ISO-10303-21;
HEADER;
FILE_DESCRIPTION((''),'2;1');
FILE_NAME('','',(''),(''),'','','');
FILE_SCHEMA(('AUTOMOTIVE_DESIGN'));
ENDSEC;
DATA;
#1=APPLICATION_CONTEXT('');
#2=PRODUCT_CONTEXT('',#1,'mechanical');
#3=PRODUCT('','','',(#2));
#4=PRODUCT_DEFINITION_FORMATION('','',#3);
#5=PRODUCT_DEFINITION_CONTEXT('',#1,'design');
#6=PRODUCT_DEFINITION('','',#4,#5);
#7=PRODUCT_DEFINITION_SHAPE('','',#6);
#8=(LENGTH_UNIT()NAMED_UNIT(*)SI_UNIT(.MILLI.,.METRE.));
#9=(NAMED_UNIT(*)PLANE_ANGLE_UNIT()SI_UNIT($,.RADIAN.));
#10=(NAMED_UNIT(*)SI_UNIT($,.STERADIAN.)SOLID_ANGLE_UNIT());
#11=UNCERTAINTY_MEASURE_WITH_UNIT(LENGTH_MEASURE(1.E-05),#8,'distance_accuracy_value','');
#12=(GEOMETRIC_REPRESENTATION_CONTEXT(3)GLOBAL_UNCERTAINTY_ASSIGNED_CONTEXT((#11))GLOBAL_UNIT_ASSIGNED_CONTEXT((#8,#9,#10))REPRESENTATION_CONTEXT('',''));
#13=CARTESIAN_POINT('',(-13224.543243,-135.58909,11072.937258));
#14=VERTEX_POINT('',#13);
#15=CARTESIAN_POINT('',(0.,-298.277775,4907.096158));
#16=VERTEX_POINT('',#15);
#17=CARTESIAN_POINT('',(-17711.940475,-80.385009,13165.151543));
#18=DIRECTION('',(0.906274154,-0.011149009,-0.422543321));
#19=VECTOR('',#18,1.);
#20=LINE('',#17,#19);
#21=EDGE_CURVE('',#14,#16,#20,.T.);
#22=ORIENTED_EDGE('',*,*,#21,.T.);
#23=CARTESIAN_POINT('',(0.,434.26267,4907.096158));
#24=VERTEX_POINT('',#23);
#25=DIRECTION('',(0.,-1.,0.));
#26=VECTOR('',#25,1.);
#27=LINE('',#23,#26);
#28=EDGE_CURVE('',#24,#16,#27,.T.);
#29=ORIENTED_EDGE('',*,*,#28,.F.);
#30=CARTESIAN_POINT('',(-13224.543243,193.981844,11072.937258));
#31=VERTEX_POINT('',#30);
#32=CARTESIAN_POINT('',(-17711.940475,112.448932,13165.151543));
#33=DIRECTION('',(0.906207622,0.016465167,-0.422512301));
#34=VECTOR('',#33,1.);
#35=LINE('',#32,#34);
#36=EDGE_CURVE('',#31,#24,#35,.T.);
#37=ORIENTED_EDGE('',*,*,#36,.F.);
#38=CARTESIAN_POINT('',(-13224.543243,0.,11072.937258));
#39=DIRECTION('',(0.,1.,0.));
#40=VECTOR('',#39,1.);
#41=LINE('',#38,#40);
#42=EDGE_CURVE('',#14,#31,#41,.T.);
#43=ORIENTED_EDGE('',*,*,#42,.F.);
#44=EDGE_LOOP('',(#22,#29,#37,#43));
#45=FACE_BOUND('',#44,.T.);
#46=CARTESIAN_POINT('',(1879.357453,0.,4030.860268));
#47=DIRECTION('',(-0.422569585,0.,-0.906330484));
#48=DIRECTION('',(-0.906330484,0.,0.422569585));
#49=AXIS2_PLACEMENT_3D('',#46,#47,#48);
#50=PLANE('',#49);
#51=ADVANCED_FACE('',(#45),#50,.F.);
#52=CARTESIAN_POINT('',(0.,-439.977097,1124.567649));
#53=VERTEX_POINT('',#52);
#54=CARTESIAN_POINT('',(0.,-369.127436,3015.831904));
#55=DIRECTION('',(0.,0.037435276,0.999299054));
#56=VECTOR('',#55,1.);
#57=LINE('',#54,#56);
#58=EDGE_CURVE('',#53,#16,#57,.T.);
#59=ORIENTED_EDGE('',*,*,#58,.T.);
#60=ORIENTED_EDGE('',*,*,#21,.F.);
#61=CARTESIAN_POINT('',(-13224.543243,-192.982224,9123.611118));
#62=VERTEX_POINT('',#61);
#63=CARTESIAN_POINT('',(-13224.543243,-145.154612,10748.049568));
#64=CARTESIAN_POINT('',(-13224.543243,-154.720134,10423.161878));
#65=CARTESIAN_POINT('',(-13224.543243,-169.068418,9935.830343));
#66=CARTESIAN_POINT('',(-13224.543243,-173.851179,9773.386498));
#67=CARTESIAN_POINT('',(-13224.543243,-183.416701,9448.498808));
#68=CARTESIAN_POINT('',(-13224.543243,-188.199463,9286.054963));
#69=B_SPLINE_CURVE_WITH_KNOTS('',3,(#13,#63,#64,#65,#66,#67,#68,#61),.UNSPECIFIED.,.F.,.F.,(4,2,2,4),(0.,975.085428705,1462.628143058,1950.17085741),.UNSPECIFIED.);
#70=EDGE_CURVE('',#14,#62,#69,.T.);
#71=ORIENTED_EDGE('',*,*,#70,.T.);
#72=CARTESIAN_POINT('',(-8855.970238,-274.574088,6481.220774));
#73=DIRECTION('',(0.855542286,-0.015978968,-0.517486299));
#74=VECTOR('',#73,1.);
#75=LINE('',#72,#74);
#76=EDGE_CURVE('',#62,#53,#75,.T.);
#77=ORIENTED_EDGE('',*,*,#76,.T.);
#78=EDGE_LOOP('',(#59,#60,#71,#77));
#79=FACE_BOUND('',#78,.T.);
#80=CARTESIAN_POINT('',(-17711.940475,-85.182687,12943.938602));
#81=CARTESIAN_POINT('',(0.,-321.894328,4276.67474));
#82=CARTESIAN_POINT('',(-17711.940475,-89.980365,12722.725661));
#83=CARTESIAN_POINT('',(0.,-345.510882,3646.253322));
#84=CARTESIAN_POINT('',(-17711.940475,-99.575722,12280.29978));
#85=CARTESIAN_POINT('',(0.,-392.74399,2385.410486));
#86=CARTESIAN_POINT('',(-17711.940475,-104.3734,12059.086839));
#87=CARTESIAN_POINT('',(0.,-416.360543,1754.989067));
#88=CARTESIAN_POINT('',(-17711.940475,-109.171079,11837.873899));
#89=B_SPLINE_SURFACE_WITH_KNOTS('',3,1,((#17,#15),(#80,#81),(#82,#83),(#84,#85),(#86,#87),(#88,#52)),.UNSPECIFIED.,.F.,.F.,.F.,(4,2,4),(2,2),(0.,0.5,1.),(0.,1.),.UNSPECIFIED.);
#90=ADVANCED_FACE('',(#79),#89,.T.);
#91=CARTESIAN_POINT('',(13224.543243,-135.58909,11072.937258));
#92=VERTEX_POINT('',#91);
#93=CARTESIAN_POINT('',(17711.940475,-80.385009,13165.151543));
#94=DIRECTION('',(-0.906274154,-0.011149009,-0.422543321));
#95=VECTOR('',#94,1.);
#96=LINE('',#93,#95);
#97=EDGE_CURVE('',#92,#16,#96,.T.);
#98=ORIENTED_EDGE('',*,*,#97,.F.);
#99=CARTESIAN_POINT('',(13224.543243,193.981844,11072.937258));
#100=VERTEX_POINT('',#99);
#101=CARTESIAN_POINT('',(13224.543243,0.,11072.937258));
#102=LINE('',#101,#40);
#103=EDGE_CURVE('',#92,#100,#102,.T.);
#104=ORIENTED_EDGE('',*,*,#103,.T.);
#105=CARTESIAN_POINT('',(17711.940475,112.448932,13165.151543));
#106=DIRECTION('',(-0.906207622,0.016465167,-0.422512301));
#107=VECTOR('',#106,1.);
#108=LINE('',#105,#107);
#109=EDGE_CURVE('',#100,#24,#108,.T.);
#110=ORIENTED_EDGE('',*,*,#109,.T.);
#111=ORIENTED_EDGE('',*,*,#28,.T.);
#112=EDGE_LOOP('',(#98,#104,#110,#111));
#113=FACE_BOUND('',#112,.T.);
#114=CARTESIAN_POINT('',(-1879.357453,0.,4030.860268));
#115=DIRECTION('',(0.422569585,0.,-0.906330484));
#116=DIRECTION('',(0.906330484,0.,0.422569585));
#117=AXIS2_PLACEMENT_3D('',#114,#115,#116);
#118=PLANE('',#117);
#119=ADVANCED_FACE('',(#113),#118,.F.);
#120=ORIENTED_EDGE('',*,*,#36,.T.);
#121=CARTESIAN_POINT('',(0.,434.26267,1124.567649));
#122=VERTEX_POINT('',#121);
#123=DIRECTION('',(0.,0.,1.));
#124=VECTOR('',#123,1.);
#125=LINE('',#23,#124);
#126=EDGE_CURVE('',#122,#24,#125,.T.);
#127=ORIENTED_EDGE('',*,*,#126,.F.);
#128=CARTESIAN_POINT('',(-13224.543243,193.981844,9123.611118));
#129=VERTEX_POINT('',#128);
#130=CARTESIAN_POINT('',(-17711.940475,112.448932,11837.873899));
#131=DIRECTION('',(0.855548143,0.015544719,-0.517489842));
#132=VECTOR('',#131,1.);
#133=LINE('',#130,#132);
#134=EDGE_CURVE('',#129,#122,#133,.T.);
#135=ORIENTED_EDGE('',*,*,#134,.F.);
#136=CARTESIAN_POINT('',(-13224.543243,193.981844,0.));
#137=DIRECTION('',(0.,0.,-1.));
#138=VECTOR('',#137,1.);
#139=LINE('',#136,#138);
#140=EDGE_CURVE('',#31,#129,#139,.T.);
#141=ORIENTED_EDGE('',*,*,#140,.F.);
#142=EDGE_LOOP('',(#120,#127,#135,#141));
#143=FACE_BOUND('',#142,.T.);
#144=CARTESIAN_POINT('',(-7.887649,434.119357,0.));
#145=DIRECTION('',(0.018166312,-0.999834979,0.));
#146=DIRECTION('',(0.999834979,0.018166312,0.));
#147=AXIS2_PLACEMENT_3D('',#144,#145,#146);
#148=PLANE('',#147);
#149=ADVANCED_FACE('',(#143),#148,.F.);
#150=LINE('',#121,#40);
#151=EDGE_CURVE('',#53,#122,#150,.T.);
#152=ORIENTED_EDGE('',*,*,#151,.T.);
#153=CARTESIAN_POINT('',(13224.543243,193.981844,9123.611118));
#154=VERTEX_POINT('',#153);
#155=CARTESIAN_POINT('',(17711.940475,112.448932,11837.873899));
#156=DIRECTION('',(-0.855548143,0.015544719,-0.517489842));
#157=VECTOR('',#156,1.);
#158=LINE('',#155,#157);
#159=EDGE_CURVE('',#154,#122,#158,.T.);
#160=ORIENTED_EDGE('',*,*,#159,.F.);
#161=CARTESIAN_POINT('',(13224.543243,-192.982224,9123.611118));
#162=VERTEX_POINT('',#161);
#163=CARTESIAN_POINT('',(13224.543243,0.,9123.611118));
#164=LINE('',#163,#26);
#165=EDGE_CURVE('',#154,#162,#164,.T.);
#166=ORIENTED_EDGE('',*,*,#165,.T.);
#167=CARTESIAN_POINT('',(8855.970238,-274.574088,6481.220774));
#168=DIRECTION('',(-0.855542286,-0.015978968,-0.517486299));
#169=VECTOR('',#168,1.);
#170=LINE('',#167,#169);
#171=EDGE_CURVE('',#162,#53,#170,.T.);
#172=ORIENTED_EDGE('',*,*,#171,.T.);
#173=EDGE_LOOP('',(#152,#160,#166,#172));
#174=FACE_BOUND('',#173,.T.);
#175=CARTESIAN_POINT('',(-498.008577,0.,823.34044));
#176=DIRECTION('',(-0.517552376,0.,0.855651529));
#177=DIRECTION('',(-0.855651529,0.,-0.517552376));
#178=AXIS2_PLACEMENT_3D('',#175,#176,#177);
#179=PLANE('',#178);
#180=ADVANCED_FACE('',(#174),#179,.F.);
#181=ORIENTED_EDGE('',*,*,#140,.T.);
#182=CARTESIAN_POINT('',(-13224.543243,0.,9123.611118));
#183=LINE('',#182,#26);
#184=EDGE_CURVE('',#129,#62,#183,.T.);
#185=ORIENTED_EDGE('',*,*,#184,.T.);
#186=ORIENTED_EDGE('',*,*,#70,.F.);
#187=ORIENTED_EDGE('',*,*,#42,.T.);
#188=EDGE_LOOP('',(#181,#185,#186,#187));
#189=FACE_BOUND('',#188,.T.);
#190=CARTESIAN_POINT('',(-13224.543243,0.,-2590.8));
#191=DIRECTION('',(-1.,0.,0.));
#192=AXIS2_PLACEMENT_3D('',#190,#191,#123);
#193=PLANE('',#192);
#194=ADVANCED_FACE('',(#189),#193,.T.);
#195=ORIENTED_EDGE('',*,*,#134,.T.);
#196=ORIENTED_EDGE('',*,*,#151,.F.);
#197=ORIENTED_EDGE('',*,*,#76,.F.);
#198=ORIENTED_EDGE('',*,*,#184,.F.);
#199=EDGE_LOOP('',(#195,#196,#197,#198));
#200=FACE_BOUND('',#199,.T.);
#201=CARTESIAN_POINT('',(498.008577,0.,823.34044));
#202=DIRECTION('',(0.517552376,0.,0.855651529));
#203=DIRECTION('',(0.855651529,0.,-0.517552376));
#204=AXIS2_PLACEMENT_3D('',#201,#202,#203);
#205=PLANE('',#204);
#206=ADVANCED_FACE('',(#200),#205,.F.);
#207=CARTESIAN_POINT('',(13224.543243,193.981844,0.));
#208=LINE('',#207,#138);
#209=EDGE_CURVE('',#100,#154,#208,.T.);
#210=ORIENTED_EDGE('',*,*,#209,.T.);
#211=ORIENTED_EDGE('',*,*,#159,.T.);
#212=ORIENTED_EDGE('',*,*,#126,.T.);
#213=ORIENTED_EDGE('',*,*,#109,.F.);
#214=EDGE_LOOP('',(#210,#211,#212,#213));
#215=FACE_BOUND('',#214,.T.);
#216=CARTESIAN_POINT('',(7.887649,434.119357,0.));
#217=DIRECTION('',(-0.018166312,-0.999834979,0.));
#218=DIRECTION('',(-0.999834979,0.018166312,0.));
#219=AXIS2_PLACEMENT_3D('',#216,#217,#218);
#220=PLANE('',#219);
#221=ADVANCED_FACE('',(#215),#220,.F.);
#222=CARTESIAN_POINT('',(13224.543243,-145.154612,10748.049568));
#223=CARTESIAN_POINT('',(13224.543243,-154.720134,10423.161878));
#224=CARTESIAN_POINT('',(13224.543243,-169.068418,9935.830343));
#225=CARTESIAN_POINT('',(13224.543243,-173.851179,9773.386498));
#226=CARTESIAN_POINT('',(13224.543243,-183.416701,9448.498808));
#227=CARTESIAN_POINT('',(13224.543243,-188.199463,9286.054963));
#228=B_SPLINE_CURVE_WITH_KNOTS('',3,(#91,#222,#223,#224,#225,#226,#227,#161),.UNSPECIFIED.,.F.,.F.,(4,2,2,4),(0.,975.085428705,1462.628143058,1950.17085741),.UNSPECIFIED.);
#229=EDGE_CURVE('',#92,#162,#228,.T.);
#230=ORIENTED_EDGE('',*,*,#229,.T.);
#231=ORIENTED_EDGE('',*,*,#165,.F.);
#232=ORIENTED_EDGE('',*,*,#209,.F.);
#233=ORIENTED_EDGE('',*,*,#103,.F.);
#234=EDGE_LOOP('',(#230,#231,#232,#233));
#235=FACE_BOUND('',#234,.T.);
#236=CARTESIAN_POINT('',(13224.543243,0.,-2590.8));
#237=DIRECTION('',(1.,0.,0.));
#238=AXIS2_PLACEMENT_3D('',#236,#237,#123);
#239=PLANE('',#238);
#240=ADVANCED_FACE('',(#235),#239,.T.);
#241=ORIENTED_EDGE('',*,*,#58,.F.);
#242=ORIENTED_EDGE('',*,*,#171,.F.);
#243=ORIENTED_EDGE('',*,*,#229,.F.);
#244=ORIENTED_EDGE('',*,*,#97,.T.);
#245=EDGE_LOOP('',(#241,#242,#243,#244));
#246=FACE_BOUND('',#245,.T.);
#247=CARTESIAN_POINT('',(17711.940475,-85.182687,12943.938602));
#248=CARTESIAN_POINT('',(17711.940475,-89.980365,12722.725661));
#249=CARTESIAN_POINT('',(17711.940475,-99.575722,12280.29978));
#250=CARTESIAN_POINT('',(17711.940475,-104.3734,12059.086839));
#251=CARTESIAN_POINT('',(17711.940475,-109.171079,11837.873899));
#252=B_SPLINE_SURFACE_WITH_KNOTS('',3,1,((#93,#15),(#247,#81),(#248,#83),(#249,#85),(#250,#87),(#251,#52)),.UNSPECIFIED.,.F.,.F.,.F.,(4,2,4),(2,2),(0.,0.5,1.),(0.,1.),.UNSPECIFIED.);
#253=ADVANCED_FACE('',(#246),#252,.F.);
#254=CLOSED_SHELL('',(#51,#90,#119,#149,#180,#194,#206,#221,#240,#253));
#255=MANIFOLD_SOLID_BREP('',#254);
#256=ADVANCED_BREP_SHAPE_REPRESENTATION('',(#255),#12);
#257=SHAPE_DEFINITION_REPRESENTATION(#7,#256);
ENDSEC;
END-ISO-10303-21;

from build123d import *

# Parameters (mm, degrees)
SKETCH4_W          = 14986.678438392
SKETCH4_H          = 7706.357590778
CUT_EXTRUDE1_DEPTH = 5181.6


with BuildPart() as part:
    # Surface-Knit3: read off the stored shape, not the designer's step
    # Surface-Knit3: loft between two sections, ruled curve by curve
    surface_knit3_from = [
        Edge.make_bspline([(-17711.940475464, -80.385008706, 13165.151542886), (-17711.940475464, -85.182687055, 12943.938602187), (-17711.940475464, -89.980365404, 12722.725661487), (-17711.940475464, -99.575722103, 12280.299780089), (-17711.940475464, -104.373400452, 12059.086839389), (-17711.940475464, -109.171078801, 11837.87389869)], [0, 0, 0, 0, 0.5, 0.5, 1, 1, 1, 1], 3),
        Edge.make_line((-17711.940475464, -80.385008706, 13165.151542886), (-17711.940475464, 112.448931944, 13165.151542886)),
        Edge.make_line((-17711.940475464, 112.448931944, 11837.87389869), (-17711.940475464, -109.171078801, 11837.87389869)),
        Edge.make_line((-17711.940475464, 112.448931944, 13165.151542886), (-17711.940475464, 112.448931944, 11837.87389869)),
    ]
    surface_knit3_to = [
        Edge.make_bspline([(0, -298.277774529, 4907.09615841), (0, -321.894328297, 4276.674740223), (0, -345.510882066, 3646.253322036), (0, -392.743989603, 2385.410485661), (0, -416.360543372, 1754.989067474), (0, -439.977097141, 1124.567649286)], [0, 0, 0, 0, 0.5, 0.5, 1, 1, 1, 1], 3),
        Edge.make_line((0, -298.277774529, 4907.09615841), (0, 434.262669848, 4907.09615841)),
        Edge.make_line((0, 434.262669848, 1124.567649286), (0, -439.977097141, 1124.567649286)),
        Edge.make_line((0, 434.262669848, 4907.09615841), (0, 434.262669848, 1124.567649286)),
    ]
    surface_knit3 = Solid(Shell([*[Face.make_surface_from_curves(surface_knit3_from[k], surface_knit3_to[k]) for k in range(4)], Face(Wire(surface_knit3_from)), Face(Wire(surface_knit3_to))]))
    add(surface_knit3)

    # Sketch4 → Cut-Extrude1 (cut, along a direction that is not the sketch's normal)
    with BuildSketch(Plane.ZY.offset(17711.940475464)):
        with Locations((12517.353947819, -161.456903525)):
            Rectangle(SKETCH4_W, SKETCH4_H)
    extrude(amount=-CUT_EXTRUDE1_DEPTH, dir=(-0.8660254037844378, 0, 0.5000000000000014), mode=Mode.SUBTRACT)

    # Mirror1: part across plane


with BuildPart() as part_1:
    add(part.part)
    add(part.part.mirror(Plane(origin=(0, 0, 0), x_dir=(0, 0, 1), z_dir=(1, 0, 0))))


solid = part_1.part
